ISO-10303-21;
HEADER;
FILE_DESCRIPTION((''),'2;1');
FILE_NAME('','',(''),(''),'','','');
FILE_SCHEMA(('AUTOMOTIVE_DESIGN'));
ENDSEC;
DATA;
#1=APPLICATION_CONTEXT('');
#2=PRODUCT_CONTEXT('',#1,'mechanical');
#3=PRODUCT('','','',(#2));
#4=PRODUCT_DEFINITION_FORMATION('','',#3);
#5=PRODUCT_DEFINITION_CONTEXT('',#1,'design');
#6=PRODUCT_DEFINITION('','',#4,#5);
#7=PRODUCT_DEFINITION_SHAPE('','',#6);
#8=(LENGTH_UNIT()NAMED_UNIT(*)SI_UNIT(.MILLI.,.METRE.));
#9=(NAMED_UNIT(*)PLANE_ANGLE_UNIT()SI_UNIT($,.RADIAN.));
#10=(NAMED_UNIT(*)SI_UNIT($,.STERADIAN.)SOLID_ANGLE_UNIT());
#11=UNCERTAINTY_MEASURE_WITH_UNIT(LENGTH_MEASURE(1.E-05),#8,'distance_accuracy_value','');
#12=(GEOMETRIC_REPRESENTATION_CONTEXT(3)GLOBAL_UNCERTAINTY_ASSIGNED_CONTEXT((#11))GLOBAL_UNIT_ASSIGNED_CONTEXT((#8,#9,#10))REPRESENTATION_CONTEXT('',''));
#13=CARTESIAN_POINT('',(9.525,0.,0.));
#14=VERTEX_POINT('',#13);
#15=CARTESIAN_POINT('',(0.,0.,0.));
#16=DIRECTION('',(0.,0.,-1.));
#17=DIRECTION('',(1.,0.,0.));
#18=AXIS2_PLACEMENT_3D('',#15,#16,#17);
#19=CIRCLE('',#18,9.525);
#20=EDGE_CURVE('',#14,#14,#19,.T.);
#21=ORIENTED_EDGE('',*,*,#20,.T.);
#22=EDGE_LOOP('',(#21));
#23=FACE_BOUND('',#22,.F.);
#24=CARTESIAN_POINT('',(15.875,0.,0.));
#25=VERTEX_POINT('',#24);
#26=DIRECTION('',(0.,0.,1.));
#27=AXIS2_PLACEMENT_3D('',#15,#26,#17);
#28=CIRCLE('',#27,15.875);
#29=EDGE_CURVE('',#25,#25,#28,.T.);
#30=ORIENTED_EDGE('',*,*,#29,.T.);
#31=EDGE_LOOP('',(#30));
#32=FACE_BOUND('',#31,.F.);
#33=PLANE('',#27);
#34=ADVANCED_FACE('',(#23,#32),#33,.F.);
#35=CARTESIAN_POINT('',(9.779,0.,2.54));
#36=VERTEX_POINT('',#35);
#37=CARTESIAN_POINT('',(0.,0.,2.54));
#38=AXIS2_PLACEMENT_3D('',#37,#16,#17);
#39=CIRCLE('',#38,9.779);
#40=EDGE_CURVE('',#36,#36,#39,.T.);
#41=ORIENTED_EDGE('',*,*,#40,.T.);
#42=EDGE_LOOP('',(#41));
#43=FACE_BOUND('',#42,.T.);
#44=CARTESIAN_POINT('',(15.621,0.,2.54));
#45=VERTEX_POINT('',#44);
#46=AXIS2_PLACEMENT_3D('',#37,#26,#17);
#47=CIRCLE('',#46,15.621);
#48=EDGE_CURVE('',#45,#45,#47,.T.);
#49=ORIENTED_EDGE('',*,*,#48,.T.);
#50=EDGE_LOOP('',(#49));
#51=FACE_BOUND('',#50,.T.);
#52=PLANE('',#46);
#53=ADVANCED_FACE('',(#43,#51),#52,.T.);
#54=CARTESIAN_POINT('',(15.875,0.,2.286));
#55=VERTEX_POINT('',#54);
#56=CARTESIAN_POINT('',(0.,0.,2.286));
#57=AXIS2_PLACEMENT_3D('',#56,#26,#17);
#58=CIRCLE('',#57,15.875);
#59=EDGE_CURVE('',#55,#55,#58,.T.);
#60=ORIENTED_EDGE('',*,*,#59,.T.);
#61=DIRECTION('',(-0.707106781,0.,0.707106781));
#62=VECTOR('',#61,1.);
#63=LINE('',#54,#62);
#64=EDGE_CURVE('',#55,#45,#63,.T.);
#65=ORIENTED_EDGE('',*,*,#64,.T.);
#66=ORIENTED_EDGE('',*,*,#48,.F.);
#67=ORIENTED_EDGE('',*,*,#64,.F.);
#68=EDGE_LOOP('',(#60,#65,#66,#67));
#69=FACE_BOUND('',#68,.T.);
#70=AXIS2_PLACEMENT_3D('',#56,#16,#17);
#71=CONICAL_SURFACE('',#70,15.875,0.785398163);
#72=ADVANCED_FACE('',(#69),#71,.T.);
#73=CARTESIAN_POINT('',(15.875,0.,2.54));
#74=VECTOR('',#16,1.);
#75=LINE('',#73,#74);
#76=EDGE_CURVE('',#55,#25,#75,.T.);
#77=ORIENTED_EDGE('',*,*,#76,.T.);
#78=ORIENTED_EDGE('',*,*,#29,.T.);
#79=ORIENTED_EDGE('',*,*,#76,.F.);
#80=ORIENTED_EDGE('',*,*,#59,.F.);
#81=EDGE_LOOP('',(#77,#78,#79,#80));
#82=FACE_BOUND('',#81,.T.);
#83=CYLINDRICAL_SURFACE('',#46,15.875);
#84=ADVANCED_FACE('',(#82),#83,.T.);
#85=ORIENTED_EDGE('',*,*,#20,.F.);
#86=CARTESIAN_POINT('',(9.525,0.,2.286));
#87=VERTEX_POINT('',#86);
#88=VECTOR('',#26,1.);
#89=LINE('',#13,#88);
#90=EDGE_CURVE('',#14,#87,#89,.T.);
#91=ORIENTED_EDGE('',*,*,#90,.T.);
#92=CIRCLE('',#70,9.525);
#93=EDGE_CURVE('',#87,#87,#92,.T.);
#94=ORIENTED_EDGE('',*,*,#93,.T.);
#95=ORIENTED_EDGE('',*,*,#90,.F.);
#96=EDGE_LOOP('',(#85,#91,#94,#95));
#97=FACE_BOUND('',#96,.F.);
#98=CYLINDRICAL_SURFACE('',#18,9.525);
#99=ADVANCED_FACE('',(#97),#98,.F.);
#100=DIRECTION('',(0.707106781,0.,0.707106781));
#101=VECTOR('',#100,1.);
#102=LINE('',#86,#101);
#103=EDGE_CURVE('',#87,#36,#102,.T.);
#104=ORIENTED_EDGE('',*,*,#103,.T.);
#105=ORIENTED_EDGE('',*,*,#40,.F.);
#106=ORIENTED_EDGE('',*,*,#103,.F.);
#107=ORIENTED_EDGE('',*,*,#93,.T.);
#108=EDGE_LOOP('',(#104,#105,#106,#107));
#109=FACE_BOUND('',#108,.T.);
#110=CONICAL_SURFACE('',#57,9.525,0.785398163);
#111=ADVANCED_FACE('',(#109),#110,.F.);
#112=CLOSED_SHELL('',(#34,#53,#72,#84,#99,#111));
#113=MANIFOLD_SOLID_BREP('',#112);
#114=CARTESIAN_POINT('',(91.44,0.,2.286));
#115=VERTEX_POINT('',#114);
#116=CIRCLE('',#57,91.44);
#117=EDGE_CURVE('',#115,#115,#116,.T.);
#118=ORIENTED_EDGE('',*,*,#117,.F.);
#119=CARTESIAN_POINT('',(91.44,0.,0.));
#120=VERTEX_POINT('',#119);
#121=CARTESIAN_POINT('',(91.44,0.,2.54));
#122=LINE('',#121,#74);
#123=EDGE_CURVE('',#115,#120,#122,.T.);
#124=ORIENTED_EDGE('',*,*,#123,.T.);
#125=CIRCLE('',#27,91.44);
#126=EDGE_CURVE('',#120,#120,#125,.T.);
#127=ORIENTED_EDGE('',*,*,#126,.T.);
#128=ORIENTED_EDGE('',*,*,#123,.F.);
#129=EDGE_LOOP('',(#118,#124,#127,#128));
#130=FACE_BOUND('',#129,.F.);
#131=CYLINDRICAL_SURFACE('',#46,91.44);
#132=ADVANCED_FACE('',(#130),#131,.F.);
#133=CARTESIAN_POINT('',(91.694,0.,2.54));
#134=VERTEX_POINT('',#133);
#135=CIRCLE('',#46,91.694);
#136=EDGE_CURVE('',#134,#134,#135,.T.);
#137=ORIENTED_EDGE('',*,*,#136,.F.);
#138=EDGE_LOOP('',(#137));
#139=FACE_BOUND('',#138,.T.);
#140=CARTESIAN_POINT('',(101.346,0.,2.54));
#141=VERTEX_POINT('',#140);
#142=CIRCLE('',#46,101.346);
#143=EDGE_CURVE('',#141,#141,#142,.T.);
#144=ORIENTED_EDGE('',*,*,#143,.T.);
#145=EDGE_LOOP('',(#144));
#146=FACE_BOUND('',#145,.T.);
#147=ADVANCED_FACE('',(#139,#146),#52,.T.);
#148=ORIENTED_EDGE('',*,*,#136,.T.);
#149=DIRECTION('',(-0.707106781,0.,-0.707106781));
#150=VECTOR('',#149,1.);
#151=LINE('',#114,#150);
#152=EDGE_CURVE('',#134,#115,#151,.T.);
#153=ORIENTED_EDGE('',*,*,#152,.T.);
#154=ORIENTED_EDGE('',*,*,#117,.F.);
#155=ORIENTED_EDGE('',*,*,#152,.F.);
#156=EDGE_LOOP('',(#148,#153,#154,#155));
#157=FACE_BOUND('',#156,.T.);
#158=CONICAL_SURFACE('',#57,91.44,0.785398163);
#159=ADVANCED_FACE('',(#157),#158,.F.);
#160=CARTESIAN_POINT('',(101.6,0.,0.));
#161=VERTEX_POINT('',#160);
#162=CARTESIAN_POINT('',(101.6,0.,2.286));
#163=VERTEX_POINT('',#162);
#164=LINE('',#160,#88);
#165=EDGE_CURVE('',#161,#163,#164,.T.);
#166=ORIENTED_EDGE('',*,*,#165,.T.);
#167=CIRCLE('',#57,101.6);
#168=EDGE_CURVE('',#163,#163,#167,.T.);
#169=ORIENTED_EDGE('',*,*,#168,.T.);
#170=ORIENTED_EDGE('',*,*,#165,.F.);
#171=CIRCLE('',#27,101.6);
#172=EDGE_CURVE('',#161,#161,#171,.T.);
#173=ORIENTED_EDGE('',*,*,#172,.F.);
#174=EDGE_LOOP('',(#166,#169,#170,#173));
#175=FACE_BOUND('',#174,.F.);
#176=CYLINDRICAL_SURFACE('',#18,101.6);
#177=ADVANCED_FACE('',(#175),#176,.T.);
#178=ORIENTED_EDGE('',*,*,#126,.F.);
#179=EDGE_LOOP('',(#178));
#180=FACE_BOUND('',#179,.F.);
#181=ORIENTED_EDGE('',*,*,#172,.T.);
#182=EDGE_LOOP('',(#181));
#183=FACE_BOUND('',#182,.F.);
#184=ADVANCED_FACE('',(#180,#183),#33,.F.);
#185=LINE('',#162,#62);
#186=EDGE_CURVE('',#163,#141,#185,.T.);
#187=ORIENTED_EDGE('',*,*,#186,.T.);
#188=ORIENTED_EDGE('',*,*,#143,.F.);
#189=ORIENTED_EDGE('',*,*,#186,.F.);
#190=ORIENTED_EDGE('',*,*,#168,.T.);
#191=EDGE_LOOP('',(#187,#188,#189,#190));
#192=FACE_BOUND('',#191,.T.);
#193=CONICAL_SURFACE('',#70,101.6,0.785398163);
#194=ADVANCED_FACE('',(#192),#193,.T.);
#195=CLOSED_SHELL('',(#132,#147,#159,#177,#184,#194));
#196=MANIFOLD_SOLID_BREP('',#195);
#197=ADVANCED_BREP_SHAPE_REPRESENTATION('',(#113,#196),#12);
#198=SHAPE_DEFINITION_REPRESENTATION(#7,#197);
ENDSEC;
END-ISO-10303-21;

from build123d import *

# Parameters (mm, degrees)
F0_R     = 101.6
F1_DEPTH = 2.54
F2_R     = 9.525
F3_DEPTH = 25.4
F4_R     = 91.44
F4_R_2   = 15.875
F5_DEPTH = 2.541
F6_SIZE  = 0.254


with BuildPart() as f1:
    # F0 (on Top) → F1 (new body)
    with BuildSketch(Plane.XY):
        Circle(F0_R)
    extrude(amount=F1_DEPTH)

    # F2 (on face) → F3 (cut)
    with BuildSketch(Plane(origin=(0, 0, 0), x_dir=(1, 0, 0), z_dir=(0, 0, -1))):
        Circle(F2_R)
    extrude(amount=-F3_DEPTH, mode=Mode.SUBTRACT)

    # F4 (on face) → F5 (cut, through all)
    with BuildSketch(Plane.XY.offset(2.54)):
        Circle(F4_R)
        Circle(F4_R_2, mode=Mode.SUBTRACT)
    extrude(amount=-F5_DEPTH, mode=Mode.SUBTRACT)

    # F6
    f6_edges = [f1.edges().sort_by_distance(p)[0] for p in [
        (-101.6, 0, 2.54),
        (-91.44, 0, 2.54),
        (-15.875, 0, 2.54),
        (-9.525, 0, 2.54),
    ]]
    chamfer(f6_edges, length=F6_SIZE)


solid = f1.part
